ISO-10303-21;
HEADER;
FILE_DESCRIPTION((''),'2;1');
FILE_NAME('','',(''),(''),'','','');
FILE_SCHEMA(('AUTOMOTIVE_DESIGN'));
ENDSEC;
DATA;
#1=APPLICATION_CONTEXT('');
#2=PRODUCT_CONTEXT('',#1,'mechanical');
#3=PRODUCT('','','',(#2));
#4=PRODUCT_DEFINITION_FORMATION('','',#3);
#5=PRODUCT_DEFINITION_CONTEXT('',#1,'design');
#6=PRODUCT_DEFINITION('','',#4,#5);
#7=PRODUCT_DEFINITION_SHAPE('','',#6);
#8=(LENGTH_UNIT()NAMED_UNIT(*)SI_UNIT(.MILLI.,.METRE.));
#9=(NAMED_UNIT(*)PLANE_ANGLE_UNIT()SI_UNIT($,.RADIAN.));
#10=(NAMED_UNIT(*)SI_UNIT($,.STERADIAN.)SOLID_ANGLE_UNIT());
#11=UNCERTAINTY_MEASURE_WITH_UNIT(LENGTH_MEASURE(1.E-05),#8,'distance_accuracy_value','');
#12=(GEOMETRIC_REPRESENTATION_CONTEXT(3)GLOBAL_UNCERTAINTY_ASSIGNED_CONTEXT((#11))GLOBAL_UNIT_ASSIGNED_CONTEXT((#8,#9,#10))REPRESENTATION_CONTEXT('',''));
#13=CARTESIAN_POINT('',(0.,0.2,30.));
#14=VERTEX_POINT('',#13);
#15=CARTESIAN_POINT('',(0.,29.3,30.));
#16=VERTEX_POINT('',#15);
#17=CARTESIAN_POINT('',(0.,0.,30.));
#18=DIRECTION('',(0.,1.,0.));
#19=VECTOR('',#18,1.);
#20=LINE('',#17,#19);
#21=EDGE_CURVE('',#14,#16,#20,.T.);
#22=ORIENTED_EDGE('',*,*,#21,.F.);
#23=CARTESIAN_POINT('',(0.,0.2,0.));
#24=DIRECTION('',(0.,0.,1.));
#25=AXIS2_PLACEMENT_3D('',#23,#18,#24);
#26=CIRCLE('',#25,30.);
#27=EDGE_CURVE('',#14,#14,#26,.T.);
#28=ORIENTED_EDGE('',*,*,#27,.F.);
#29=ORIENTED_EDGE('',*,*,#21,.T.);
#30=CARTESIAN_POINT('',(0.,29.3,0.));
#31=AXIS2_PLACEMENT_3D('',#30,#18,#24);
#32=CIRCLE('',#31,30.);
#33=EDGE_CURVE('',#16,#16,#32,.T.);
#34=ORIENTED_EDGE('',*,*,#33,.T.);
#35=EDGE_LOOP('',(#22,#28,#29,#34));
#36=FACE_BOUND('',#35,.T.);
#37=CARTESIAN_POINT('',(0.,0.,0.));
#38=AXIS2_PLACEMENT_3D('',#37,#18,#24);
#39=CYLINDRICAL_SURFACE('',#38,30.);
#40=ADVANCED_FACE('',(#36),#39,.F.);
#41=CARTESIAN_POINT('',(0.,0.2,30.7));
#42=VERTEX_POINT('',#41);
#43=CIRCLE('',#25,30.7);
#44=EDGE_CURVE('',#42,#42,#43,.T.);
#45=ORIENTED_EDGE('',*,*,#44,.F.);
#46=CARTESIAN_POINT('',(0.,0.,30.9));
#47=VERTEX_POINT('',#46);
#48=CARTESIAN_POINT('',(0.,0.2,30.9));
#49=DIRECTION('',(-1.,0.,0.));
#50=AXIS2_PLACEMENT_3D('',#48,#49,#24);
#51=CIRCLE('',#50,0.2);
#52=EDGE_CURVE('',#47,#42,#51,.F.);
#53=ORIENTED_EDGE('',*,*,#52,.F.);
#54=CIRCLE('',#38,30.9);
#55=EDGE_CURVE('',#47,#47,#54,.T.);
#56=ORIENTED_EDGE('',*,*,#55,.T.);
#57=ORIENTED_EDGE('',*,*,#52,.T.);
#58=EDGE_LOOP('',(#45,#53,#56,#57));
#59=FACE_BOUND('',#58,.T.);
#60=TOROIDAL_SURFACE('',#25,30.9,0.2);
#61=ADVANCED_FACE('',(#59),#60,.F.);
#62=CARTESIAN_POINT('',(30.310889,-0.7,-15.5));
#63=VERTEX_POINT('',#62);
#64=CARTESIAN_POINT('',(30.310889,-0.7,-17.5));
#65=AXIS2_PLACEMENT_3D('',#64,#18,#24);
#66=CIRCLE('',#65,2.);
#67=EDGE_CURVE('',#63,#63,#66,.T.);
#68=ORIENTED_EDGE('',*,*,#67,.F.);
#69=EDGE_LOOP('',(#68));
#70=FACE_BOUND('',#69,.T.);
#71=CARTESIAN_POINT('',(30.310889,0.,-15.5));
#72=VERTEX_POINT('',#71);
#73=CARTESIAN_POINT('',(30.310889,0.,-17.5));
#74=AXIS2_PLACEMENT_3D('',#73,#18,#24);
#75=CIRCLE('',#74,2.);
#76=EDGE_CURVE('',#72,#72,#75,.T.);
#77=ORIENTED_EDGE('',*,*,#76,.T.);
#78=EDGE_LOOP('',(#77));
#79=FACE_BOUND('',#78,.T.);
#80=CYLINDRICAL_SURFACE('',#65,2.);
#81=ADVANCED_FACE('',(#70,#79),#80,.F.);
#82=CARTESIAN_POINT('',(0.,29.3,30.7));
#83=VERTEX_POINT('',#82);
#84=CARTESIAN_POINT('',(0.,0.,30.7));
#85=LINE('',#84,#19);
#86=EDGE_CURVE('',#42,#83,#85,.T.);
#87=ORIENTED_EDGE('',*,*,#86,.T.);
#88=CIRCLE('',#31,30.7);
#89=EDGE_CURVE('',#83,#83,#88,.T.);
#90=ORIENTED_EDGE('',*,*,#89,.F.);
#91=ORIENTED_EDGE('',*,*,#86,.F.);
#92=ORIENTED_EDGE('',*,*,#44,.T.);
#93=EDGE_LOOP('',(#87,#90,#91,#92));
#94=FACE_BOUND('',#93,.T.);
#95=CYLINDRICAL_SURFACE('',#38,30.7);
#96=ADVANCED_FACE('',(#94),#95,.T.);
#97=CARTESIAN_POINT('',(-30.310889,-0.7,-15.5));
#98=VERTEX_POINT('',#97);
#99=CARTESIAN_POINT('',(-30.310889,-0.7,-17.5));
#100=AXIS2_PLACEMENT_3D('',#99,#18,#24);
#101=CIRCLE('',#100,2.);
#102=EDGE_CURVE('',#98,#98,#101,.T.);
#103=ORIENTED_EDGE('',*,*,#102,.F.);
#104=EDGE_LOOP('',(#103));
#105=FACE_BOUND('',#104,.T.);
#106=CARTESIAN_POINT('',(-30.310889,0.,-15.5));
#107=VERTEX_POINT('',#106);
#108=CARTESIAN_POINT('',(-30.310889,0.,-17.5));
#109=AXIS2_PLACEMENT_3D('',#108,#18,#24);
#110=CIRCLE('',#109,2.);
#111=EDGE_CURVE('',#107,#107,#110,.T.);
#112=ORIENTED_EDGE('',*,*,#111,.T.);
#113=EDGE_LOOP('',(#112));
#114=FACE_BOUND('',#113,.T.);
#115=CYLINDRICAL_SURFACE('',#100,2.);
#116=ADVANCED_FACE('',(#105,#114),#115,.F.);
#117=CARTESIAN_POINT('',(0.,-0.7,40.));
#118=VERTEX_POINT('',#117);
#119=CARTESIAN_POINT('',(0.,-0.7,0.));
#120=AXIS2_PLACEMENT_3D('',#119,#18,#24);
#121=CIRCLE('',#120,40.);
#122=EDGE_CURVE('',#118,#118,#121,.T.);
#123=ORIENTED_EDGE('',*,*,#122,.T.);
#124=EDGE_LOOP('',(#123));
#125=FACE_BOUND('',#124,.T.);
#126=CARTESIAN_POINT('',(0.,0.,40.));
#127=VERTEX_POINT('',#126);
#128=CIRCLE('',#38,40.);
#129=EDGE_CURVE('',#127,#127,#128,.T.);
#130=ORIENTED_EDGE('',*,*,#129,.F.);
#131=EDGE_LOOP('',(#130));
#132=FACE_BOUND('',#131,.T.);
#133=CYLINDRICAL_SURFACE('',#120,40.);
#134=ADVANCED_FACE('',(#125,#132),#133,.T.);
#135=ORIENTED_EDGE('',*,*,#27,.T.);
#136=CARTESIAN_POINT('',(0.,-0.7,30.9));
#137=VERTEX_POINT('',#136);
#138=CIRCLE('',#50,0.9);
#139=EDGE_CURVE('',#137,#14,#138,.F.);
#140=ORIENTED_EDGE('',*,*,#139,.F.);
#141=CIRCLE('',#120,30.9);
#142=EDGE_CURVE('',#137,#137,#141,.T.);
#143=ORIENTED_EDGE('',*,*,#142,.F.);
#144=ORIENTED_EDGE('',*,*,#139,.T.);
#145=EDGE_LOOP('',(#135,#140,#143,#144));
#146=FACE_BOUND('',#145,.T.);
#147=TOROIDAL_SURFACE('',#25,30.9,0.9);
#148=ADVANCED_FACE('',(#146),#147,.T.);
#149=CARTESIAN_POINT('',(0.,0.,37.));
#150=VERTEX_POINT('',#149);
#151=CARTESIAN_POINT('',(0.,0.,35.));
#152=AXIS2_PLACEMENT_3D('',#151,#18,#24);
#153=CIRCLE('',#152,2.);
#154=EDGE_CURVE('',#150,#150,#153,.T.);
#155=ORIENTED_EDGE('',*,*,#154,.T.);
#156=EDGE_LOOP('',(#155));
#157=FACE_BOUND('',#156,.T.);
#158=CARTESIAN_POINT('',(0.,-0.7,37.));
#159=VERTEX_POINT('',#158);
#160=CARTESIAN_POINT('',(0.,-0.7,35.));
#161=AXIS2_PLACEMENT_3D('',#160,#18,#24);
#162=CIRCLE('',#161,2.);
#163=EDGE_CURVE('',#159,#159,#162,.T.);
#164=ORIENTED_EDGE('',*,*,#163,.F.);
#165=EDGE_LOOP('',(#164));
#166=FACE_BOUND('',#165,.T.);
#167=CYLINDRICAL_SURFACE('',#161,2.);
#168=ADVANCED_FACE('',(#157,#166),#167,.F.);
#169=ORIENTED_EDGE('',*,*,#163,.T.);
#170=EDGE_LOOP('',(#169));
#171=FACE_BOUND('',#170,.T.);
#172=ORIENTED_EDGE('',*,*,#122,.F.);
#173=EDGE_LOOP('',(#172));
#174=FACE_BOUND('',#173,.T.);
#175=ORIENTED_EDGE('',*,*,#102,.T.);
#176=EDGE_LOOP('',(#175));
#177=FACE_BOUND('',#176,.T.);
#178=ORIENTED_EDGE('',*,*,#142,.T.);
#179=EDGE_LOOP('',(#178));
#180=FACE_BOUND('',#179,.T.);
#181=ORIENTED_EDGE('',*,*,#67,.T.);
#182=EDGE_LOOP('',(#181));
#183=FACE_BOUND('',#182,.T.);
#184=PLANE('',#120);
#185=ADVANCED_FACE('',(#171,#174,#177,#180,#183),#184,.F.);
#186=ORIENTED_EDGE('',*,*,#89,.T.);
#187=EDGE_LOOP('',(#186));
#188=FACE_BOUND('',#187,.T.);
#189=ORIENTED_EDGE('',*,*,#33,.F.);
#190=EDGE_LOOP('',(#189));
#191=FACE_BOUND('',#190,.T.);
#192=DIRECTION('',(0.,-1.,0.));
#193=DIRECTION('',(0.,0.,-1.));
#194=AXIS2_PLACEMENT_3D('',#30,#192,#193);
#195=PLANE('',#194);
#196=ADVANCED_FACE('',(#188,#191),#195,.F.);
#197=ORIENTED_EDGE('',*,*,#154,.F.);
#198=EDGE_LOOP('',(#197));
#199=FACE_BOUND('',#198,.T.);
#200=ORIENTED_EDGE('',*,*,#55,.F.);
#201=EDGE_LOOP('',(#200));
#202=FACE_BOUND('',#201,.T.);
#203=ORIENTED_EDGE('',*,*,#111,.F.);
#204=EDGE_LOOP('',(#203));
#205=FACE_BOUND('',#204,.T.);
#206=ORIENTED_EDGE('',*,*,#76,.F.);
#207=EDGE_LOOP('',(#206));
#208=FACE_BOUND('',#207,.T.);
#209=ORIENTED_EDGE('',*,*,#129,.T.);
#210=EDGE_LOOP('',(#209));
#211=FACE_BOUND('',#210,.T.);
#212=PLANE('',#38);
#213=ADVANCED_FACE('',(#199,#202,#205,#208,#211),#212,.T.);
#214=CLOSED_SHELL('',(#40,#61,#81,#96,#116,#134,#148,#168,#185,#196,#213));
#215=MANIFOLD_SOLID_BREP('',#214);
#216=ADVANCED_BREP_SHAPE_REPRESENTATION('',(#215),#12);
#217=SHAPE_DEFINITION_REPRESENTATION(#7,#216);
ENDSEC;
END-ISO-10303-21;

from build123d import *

# Parameters (mm, degrees)
SKETCH_1_R             = 40
SKETCH_1_R_2           = 30
SKETCH_1_R_3           = 2
SM_BASE_FLANGE_1_DEPTH = 0.7


# Read off the part's stored shape, not the designer's step: 边线-法兰2
# Sheet-metal steps are written as plain solids
with BuildPart() as part:
    # Sketch 1 → 基体-法兰1 (new body)
    with BuildSketch(Plane(origin=(0, 0, 0), x_dir=(1, 0, 0), z_dir=(0, 1, 0))):
        with Locations(Location((0, 0, 0), (0, 0, 270))):
            Circle(SKETCH_1_R)
        with Locations(Location((0, 0, 0), (0, 0, 270))):
            Circle(SKETCH_1_R_2, mode=Mode.SUBTRACT)
        with Locations(Location((-30.310889132, 17.5, 0), (0, 0, 270))):
            Circle(SKETCH_1_R_3, mode=Mode.SUBTRACT)
        with Locations(Location((0, -35, 0), (0, 0, 270))):
            Circle(SKETCH_1_R_3, mode=Mode.SUBTRACT)
        with Locations(Location((30.310889132, 17.5, 0), (0, 0, 270))):
            Circle(SKETCH_1_R_3, mode=Mode.SUBTRACT)
    extrude(amount=-SM_BASE_FLANGE_1_DEPTH)

    # 边线-法兰2 outline → 边线-法兰2 (revolve, cut)
    with BuildSketch(Plane.XY):
        with BuildLine():
            Line((30.022503561, 0), (30, 0))
            Line((30, 0), (30, -0.7))
            Line((30, -0.7), (30.9, -0.7))
            ThreePointArc((30.9, -0.7), (30.338751392, -0.503562364), (30.022503561, 0))
        make_face()
    revolve(axis=Axis((0, 0, 0), (0, 1, 0)), mode=Mode.SUBTRACT)

    # Sm Edge Flange 2 2 outline → Sm Edge Flange 2 2 (revolve)
    with BuildSketch(Plane.XY):
        with BuildLine():
            Line((30.7, 29.3), (30, 29.3))
            Line((30, 29.3), (30, 0.2))
            ThreePointArc((30, 0.2), (30.005643585, 0.099368978), (30.022503561, 0))
            Line((30.022503561, 0), (30.9, 0))
            ThreePointArc((30.9, 0), (30.758578644, 0.058578644), (30.7, 0.2))
            Line((30.7, 0.2), (30.7, 29.3))
        make_face()
    revolve(axis=Axis((0, 0, 0), (0, 1, 0)))


solid = part.part
